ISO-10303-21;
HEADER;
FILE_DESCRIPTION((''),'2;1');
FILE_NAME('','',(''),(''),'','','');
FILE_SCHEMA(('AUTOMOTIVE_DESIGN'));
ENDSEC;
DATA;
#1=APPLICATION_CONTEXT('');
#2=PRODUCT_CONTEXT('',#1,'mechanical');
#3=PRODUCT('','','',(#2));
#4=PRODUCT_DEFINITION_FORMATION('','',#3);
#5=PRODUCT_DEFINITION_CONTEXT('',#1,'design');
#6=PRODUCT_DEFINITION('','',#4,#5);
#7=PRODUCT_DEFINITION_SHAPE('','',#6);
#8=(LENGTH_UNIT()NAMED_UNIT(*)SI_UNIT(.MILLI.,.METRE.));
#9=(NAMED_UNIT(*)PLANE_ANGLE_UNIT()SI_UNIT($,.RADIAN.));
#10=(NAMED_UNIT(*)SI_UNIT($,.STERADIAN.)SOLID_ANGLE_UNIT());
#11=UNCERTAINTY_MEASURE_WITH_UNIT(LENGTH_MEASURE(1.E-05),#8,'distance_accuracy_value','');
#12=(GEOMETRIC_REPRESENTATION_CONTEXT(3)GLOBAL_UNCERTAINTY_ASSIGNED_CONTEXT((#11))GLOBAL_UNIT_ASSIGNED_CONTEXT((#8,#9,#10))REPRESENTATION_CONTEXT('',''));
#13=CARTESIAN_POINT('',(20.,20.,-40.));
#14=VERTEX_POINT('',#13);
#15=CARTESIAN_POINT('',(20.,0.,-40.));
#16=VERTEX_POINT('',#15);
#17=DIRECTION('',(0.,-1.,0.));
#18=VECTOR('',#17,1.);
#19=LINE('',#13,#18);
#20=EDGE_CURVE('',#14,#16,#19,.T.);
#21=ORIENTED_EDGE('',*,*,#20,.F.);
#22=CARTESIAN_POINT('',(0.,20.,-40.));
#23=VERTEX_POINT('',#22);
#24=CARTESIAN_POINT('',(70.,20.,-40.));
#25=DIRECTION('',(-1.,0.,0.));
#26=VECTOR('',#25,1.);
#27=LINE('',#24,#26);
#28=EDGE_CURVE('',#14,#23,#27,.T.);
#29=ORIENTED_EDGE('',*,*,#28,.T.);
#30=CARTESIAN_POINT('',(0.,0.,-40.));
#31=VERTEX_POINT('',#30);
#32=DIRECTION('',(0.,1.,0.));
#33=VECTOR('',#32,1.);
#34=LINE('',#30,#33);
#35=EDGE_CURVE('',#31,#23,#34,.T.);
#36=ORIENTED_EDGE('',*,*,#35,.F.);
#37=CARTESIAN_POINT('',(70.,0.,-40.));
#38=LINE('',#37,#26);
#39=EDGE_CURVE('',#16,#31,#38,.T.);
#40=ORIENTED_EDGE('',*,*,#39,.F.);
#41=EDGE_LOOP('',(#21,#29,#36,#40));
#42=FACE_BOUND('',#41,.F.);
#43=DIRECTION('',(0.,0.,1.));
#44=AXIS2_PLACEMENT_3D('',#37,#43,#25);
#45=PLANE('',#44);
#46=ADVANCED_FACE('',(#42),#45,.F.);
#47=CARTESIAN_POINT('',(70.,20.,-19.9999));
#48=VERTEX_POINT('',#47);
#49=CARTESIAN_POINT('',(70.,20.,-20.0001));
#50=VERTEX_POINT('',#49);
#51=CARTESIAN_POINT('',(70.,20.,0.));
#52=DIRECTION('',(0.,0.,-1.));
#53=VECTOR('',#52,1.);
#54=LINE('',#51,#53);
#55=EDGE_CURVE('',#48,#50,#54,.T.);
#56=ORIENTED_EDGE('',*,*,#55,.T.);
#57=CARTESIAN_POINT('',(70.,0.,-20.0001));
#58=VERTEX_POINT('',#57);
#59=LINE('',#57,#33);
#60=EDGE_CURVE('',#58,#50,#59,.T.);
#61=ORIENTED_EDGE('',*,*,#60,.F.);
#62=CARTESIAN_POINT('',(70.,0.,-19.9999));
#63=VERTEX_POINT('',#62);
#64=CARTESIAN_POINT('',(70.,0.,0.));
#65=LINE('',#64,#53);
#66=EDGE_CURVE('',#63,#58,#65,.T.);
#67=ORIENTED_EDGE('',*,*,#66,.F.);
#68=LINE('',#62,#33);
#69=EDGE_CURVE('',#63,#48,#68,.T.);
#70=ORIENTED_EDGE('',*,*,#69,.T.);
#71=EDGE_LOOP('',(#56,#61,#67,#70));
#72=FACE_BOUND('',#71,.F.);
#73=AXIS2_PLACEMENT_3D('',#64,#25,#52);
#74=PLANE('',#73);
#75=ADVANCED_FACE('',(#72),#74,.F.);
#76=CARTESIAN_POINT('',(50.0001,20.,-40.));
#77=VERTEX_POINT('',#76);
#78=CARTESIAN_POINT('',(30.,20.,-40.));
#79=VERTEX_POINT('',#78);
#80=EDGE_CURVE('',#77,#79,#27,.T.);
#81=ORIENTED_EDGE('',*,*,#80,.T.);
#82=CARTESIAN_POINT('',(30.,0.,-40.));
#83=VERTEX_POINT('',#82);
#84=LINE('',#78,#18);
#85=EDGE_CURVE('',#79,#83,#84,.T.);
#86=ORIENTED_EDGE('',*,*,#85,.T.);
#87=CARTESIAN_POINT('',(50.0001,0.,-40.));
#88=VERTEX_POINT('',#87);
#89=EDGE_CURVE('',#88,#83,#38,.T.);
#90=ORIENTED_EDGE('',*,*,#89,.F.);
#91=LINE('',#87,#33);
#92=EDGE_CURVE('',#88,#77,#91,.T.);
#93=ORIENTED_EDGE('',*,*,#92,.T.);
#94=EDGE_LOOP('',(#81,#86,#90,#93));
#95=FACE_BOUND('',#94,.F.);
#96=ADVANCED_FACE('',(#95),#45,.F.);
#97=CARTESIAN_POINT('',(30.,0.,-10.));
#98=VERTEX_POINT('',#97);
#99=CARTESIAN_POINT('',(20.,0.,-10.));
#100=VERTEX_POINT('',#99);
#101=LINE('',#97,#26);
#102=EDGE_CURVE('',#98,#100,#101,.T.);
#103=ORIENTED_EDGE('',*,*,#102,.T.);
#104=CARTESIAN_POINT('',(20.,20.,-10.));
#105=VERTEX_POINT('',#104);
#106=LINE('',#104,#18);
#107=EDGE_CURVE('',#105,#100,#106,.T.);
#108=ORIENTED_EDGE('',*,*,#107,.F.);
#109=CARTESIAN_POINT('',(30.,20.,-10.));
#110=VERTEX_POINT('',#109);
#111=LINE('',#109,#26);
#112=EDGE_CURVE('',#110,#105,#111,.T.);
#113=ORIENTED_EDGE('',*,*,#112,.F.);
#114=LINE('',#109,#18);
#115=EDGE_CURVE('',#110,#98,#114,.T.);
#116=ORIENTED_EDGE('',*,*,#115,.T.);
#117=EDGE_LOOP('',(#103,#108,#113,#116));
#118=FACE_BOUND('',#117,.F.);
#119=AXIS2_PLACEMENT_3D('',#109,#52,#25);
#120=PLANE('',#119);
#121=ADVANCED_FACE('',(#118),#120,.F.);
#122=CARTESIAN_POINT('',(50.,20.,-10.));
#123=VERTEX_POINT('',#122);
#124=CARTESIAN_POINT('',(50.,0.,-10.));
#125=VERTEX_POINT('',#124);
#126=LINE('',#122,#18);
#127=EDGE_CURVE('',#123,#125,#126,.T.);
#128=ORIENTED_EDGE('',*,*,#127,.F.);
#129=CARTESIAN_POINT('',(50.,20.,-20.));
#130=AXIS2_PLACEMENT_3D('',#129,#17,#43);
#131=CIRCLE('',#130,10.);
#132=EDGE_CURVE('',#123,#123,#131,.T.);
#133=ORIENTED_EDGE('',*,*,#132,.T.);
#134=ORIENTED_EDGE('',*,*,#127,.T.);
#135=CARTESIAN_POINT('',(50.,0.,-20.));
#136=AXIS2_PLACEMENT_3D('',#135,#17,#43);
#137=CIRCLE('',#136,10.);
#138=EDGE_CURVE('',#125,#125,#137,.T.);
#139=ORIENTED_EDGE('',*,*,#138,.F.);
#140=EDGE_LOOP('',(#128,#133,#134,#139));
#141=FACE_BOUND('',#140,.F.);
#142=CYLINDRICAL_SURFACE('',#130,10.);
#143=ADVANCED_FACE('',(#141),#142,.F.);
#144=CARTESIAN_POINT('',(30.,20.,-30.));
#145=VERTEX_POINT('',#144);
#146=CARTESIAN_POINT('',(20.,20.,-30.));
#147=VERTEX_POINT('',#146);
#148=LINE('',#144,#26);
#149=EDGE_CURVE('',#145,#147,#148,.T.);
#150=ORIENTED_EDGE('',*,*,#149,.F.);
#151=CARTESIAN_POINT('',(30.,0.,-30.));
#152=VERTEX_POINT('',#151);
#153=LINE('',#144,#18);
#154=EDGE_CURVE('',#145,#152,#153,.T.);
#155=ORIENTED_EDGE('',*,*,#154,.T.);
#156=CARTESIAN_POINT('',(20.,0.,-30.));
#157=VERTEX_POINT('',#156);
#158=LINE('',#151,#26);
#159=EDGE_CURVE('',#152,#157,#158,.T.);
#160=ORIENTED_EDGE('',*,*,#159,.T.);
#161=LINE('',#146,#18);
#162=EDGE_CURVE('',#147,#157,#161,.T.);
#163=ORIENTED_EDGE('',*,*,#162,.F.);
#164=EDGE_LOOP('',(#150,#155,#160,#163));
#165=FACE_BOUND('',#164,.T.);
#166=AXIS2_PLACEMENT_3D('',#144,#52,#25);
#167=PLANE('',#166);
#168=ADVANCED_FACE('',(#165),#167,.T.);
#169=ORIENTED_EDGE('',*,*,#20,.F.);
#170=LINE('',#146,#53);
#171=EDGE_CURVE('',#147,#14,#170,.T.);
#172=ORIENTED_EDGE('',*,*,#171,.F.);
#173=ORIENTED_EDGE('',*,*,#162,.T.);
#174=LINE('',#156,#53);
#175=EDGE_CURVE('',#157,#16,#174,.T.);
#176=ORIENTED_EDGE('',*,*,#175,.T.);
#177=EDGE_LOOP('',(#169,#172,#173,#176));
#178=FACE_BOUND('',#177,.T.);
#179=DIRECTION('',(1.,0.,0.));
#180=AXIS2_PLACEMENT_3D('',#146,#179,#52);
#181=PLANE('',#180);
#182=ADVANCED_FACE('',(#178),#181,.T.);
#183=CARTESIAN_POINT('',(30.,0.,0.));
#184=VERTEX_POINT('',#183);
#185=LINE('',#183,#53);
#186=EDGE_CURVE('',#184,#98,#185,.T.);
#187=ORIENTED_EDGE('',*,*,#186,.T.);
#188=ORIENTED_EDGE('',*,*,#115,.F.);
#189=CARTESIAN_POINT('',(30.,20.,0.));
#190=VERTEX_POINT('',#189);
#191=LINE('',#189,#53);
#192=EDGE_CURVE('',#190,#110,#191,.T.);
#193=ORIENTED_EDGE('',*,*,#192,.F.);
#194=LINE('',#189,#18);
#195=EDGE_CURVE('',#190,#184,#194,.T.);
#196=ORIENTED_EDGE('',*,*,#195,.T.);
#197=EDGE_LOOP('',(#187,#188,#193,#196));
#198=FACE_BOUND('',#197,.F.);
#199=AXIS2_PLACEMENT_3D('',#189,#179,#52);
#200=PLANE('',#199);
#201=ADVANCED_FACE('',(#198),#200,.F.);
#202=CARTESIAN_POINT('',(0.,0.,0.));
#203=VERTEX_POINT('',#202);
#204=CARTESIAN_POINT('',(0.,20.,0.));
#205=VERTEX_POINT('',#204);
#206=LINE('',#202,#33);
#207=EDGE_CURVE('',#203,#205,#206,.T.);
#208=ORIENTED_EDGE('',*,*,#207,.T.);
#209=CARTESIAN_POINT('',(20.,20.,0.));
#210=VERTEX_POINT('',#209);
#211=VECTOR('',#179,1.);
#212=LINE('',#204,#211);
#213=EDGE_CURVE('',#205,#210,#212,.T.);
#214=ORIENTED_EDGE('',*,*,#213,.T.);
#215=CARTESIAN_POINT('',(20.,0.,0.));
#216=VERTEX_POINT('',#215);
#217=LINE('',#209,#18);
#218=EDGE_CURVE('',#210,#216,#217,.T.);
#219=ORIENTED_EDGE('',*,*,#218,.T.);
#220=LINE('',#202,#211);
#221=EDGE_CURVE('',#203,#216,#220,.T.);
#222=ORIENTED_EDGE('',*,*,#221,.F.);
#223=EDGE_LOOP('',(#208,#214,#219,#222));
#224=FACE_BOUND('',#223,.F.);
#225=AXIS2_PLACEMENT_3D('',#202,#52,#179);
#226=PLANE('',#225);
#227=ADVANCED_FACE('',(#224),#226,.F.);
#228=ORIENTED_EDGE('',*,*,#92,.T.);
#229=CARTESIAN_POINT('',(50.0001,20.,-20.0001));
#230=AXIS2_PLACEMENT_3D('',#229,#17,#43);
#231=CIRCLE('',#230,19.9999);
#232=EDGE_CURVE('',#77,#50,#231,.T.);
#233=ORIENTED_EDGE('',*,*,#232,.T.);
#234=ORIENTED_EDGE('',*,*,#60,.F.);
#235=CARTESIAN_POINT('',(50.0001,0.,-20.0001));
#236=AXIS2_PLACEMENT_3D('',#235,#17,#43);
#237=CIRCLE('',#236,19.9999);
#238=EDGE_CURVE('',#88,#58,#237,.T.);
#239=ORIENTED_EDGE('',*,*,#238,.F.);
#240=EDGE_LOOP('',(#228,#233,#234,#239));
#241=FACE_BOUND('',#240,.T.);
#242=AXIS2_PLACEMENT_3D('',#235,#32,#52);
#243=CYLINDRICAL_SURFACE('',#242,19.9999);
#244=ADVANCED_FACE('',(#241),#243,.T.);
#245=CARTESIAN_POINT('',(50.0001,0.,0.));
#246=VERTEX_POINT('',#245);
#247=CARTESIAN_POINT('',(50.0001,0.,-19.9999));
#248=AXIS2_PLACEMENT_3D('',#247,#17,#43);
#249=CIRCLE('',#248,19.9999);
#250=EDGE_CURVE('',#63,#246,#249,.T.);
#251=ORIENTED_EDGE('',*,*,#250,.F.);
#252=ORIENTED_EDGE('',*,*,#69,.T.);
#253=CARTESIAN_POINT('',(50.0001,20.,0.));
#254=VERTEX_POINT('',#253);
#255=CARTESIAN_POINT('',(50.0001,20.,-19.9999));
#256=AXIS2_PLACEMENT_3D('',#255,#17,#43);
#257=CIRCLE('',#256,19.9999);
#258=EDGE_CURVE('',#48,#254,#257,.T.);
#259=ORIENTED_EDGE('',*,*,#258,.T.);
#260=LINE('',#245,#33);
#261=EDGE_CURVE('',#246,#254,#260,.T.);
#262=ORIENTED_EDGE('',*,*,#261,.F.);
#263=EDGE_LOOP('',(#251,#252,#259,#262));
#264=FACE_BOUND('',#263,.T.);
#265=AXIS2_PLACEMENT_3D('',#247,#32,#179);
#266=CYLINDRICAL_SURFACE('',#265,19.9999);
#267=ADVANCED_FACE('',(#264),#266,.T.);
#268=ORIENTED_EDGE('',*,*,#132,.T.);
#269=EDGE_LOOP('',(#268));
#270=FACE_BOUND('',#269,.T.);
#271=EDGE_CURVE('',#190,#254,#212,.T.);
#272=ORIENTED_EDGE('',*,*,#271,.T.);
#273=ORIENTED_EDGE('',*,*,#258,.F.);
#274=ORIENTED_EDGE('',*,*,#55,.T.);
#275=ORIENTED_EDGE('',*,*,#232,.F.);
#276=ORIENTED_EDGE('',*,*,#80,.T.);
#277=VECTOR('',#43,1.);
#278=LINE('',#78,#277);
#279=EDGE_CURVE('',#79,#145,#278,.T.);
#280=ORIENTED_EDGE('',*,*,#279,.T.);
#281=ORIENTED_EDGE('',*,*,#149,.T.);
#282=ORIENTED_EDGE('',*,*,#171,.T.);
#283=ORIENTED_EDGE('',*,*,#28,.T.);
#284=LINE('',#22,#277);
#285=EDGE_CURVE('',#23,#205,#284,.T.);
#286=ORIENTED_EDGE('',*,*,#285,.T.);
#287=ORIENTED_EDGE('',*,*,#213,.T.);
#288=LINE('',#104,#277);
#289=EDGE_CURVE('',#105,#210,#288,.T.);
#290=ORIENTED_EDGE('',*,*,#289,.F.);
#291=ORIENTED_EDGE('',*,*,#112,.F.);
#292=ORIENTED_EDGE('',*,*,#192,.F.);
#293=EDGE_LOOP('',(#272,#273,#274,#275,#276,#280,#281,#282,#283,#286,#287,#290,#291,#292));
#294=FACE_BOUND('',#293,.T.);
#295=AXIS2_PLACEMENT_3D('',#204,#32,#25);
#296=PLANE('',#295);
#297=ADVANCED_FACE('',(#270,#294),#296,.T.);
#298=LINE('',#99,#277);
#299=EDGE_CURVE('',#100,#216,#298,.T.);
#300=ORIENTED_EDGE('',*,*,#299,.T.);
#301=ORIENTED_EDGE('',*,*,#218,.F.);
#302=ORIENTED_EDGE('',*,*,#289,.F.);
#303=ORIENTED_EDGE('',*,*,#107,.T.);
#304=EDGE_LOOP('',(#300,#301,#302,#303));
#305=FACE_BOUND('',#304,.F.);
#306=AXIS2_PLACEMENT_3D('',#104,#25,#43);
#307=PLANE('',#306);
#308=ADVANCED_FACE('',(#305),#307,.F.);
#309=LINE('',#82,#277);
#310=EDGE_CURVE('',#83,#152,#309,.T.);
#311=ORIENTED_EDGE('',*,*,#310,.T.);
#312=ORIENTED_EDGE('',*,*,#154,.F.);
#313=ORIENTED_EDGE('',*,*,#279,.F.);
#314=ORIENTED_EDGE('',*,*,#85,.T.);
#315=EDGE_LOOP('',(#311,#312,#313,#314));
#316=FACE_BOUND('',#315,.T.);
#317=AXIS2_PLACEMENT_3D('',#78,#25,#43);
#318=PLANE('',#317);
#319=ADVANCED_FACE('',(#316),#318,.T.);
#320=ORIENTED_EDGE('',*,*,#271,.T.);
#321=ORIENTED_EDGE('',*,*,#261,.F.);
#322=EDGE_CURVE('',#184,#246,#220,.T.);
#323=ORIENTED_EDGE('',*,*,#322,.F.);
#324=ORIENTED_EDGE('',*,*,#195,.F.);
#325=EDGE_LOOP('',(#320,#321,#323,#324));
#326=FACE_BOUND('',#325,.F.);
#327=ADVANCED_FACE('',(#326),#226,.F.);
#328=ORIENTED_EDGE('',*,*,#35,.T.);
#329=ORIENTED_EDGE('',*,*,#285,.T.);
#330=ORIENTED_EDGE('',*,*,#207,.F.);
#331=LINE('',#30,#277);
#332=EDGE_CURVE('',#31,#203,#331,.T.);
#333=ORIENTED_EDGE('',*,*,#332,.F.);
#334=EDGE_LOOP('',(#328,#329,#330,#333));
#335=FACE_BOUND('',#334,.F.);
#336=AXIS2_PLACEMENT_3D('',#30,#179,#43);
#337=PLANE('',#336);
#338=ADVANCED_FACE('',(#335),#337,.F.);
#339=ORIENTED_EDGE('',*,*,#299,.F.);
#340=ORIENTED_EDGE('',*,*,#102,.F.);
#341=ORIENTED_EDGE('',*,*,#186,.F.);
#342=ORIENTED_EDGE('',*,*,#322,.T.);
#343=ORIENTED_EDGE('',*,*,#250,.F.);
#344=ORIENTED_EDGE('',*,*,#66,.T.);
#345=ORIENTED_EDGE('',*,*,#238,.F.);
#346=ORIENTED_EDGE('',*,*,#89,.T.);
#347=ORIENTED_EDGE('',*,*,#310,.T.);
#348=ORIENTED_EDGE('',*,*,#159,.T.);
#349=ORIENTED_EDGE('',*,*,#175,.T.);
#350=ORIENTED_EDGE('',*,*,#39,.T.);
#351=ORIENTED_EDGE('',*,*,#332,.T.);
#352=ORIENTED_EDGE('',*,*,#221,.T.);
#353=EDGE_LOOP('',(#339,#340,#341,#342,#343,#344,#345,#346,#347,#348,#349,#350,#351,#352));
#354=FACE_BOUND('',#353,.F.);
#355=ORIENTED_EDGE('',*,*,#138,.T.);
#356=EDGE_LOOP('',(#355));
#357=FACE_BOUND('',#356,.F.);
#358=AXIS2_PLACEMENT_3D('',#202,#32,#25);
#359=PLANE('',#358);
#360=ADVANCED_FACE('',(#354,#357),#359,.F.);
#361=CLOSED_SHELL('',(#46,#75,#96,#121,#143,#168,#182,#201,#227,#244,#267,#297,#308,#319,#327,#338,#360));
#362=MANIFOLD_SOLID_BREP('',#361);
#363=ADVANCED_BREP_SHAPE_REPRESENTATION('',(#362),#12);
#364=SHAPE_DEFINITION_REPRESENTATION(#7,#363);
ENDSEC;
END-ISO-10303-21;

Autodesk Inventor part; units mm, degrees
ref_plane "YZ Plane" through (0, 0, 0) normal (1, 0, 0) x (0, 1, 0)
ref_plane "XZ Plane" through (0, 0, 0) normal (0, 1, 0) x (-1, 0, 0)
ref_plane "XY Plane" through (0, 0, 0) normal (0, 0, 1) x (1, 0, 0)
sketch "草圖1" plane through (0, 0, 0) normal (0, 1, 0) x (-1, 0, 0)
  line L0 (0, 0) -> (-70, 0)
  line L1 (-70, 0) -> (-70, -40)
  line L2 (-70, -40) -> (0, -40)
  line L3 (0, -40) -> (0, 0)
  dimension "d0" = 40
  dimension "d1" = 70
extrude "擠出1" add sketch "草圖1" along normal blind 20
sketch "草圖2" plane through (0, 20, 0) normal (0, 1, 0) x (1, 0, 0)
  line L0 (0, 0) -> (70, 0) projected
  line L1 (20, 0) -> (30, 0)
  line L2 (30, 0) -> (30, 10)
  line L3 (30, 10) -> (20, 10)
  line L4 (20, 10) -> (20, 0)
  line L5 (70, 40) -> (0, 40) projected
  line L6 (20, 40) -> (30, 40)
  line L7 (30, 40) -> (30, 30)
  line L8 (30, 30) -> (20, 30)
  line L9 (20, 30) -> (20, 40)
  line L10 (0, 40) -> (0, 0) projected
  dimension "d4" = 10
  dimension "d5" = 10
  dimension "d6" = 10
  dimension "d7" = 20
extrude "擠出2" cut sketch "草圖2" against normal blind 20
fillet "圓角1" radius 20 2 edges at (70, 10, 0) (70, 10, -40)
hole "孔1" at (50, 20, -20) direction (0, -1, 0) diameter 20 depth 20 tip angle 118
properties part number "32"
